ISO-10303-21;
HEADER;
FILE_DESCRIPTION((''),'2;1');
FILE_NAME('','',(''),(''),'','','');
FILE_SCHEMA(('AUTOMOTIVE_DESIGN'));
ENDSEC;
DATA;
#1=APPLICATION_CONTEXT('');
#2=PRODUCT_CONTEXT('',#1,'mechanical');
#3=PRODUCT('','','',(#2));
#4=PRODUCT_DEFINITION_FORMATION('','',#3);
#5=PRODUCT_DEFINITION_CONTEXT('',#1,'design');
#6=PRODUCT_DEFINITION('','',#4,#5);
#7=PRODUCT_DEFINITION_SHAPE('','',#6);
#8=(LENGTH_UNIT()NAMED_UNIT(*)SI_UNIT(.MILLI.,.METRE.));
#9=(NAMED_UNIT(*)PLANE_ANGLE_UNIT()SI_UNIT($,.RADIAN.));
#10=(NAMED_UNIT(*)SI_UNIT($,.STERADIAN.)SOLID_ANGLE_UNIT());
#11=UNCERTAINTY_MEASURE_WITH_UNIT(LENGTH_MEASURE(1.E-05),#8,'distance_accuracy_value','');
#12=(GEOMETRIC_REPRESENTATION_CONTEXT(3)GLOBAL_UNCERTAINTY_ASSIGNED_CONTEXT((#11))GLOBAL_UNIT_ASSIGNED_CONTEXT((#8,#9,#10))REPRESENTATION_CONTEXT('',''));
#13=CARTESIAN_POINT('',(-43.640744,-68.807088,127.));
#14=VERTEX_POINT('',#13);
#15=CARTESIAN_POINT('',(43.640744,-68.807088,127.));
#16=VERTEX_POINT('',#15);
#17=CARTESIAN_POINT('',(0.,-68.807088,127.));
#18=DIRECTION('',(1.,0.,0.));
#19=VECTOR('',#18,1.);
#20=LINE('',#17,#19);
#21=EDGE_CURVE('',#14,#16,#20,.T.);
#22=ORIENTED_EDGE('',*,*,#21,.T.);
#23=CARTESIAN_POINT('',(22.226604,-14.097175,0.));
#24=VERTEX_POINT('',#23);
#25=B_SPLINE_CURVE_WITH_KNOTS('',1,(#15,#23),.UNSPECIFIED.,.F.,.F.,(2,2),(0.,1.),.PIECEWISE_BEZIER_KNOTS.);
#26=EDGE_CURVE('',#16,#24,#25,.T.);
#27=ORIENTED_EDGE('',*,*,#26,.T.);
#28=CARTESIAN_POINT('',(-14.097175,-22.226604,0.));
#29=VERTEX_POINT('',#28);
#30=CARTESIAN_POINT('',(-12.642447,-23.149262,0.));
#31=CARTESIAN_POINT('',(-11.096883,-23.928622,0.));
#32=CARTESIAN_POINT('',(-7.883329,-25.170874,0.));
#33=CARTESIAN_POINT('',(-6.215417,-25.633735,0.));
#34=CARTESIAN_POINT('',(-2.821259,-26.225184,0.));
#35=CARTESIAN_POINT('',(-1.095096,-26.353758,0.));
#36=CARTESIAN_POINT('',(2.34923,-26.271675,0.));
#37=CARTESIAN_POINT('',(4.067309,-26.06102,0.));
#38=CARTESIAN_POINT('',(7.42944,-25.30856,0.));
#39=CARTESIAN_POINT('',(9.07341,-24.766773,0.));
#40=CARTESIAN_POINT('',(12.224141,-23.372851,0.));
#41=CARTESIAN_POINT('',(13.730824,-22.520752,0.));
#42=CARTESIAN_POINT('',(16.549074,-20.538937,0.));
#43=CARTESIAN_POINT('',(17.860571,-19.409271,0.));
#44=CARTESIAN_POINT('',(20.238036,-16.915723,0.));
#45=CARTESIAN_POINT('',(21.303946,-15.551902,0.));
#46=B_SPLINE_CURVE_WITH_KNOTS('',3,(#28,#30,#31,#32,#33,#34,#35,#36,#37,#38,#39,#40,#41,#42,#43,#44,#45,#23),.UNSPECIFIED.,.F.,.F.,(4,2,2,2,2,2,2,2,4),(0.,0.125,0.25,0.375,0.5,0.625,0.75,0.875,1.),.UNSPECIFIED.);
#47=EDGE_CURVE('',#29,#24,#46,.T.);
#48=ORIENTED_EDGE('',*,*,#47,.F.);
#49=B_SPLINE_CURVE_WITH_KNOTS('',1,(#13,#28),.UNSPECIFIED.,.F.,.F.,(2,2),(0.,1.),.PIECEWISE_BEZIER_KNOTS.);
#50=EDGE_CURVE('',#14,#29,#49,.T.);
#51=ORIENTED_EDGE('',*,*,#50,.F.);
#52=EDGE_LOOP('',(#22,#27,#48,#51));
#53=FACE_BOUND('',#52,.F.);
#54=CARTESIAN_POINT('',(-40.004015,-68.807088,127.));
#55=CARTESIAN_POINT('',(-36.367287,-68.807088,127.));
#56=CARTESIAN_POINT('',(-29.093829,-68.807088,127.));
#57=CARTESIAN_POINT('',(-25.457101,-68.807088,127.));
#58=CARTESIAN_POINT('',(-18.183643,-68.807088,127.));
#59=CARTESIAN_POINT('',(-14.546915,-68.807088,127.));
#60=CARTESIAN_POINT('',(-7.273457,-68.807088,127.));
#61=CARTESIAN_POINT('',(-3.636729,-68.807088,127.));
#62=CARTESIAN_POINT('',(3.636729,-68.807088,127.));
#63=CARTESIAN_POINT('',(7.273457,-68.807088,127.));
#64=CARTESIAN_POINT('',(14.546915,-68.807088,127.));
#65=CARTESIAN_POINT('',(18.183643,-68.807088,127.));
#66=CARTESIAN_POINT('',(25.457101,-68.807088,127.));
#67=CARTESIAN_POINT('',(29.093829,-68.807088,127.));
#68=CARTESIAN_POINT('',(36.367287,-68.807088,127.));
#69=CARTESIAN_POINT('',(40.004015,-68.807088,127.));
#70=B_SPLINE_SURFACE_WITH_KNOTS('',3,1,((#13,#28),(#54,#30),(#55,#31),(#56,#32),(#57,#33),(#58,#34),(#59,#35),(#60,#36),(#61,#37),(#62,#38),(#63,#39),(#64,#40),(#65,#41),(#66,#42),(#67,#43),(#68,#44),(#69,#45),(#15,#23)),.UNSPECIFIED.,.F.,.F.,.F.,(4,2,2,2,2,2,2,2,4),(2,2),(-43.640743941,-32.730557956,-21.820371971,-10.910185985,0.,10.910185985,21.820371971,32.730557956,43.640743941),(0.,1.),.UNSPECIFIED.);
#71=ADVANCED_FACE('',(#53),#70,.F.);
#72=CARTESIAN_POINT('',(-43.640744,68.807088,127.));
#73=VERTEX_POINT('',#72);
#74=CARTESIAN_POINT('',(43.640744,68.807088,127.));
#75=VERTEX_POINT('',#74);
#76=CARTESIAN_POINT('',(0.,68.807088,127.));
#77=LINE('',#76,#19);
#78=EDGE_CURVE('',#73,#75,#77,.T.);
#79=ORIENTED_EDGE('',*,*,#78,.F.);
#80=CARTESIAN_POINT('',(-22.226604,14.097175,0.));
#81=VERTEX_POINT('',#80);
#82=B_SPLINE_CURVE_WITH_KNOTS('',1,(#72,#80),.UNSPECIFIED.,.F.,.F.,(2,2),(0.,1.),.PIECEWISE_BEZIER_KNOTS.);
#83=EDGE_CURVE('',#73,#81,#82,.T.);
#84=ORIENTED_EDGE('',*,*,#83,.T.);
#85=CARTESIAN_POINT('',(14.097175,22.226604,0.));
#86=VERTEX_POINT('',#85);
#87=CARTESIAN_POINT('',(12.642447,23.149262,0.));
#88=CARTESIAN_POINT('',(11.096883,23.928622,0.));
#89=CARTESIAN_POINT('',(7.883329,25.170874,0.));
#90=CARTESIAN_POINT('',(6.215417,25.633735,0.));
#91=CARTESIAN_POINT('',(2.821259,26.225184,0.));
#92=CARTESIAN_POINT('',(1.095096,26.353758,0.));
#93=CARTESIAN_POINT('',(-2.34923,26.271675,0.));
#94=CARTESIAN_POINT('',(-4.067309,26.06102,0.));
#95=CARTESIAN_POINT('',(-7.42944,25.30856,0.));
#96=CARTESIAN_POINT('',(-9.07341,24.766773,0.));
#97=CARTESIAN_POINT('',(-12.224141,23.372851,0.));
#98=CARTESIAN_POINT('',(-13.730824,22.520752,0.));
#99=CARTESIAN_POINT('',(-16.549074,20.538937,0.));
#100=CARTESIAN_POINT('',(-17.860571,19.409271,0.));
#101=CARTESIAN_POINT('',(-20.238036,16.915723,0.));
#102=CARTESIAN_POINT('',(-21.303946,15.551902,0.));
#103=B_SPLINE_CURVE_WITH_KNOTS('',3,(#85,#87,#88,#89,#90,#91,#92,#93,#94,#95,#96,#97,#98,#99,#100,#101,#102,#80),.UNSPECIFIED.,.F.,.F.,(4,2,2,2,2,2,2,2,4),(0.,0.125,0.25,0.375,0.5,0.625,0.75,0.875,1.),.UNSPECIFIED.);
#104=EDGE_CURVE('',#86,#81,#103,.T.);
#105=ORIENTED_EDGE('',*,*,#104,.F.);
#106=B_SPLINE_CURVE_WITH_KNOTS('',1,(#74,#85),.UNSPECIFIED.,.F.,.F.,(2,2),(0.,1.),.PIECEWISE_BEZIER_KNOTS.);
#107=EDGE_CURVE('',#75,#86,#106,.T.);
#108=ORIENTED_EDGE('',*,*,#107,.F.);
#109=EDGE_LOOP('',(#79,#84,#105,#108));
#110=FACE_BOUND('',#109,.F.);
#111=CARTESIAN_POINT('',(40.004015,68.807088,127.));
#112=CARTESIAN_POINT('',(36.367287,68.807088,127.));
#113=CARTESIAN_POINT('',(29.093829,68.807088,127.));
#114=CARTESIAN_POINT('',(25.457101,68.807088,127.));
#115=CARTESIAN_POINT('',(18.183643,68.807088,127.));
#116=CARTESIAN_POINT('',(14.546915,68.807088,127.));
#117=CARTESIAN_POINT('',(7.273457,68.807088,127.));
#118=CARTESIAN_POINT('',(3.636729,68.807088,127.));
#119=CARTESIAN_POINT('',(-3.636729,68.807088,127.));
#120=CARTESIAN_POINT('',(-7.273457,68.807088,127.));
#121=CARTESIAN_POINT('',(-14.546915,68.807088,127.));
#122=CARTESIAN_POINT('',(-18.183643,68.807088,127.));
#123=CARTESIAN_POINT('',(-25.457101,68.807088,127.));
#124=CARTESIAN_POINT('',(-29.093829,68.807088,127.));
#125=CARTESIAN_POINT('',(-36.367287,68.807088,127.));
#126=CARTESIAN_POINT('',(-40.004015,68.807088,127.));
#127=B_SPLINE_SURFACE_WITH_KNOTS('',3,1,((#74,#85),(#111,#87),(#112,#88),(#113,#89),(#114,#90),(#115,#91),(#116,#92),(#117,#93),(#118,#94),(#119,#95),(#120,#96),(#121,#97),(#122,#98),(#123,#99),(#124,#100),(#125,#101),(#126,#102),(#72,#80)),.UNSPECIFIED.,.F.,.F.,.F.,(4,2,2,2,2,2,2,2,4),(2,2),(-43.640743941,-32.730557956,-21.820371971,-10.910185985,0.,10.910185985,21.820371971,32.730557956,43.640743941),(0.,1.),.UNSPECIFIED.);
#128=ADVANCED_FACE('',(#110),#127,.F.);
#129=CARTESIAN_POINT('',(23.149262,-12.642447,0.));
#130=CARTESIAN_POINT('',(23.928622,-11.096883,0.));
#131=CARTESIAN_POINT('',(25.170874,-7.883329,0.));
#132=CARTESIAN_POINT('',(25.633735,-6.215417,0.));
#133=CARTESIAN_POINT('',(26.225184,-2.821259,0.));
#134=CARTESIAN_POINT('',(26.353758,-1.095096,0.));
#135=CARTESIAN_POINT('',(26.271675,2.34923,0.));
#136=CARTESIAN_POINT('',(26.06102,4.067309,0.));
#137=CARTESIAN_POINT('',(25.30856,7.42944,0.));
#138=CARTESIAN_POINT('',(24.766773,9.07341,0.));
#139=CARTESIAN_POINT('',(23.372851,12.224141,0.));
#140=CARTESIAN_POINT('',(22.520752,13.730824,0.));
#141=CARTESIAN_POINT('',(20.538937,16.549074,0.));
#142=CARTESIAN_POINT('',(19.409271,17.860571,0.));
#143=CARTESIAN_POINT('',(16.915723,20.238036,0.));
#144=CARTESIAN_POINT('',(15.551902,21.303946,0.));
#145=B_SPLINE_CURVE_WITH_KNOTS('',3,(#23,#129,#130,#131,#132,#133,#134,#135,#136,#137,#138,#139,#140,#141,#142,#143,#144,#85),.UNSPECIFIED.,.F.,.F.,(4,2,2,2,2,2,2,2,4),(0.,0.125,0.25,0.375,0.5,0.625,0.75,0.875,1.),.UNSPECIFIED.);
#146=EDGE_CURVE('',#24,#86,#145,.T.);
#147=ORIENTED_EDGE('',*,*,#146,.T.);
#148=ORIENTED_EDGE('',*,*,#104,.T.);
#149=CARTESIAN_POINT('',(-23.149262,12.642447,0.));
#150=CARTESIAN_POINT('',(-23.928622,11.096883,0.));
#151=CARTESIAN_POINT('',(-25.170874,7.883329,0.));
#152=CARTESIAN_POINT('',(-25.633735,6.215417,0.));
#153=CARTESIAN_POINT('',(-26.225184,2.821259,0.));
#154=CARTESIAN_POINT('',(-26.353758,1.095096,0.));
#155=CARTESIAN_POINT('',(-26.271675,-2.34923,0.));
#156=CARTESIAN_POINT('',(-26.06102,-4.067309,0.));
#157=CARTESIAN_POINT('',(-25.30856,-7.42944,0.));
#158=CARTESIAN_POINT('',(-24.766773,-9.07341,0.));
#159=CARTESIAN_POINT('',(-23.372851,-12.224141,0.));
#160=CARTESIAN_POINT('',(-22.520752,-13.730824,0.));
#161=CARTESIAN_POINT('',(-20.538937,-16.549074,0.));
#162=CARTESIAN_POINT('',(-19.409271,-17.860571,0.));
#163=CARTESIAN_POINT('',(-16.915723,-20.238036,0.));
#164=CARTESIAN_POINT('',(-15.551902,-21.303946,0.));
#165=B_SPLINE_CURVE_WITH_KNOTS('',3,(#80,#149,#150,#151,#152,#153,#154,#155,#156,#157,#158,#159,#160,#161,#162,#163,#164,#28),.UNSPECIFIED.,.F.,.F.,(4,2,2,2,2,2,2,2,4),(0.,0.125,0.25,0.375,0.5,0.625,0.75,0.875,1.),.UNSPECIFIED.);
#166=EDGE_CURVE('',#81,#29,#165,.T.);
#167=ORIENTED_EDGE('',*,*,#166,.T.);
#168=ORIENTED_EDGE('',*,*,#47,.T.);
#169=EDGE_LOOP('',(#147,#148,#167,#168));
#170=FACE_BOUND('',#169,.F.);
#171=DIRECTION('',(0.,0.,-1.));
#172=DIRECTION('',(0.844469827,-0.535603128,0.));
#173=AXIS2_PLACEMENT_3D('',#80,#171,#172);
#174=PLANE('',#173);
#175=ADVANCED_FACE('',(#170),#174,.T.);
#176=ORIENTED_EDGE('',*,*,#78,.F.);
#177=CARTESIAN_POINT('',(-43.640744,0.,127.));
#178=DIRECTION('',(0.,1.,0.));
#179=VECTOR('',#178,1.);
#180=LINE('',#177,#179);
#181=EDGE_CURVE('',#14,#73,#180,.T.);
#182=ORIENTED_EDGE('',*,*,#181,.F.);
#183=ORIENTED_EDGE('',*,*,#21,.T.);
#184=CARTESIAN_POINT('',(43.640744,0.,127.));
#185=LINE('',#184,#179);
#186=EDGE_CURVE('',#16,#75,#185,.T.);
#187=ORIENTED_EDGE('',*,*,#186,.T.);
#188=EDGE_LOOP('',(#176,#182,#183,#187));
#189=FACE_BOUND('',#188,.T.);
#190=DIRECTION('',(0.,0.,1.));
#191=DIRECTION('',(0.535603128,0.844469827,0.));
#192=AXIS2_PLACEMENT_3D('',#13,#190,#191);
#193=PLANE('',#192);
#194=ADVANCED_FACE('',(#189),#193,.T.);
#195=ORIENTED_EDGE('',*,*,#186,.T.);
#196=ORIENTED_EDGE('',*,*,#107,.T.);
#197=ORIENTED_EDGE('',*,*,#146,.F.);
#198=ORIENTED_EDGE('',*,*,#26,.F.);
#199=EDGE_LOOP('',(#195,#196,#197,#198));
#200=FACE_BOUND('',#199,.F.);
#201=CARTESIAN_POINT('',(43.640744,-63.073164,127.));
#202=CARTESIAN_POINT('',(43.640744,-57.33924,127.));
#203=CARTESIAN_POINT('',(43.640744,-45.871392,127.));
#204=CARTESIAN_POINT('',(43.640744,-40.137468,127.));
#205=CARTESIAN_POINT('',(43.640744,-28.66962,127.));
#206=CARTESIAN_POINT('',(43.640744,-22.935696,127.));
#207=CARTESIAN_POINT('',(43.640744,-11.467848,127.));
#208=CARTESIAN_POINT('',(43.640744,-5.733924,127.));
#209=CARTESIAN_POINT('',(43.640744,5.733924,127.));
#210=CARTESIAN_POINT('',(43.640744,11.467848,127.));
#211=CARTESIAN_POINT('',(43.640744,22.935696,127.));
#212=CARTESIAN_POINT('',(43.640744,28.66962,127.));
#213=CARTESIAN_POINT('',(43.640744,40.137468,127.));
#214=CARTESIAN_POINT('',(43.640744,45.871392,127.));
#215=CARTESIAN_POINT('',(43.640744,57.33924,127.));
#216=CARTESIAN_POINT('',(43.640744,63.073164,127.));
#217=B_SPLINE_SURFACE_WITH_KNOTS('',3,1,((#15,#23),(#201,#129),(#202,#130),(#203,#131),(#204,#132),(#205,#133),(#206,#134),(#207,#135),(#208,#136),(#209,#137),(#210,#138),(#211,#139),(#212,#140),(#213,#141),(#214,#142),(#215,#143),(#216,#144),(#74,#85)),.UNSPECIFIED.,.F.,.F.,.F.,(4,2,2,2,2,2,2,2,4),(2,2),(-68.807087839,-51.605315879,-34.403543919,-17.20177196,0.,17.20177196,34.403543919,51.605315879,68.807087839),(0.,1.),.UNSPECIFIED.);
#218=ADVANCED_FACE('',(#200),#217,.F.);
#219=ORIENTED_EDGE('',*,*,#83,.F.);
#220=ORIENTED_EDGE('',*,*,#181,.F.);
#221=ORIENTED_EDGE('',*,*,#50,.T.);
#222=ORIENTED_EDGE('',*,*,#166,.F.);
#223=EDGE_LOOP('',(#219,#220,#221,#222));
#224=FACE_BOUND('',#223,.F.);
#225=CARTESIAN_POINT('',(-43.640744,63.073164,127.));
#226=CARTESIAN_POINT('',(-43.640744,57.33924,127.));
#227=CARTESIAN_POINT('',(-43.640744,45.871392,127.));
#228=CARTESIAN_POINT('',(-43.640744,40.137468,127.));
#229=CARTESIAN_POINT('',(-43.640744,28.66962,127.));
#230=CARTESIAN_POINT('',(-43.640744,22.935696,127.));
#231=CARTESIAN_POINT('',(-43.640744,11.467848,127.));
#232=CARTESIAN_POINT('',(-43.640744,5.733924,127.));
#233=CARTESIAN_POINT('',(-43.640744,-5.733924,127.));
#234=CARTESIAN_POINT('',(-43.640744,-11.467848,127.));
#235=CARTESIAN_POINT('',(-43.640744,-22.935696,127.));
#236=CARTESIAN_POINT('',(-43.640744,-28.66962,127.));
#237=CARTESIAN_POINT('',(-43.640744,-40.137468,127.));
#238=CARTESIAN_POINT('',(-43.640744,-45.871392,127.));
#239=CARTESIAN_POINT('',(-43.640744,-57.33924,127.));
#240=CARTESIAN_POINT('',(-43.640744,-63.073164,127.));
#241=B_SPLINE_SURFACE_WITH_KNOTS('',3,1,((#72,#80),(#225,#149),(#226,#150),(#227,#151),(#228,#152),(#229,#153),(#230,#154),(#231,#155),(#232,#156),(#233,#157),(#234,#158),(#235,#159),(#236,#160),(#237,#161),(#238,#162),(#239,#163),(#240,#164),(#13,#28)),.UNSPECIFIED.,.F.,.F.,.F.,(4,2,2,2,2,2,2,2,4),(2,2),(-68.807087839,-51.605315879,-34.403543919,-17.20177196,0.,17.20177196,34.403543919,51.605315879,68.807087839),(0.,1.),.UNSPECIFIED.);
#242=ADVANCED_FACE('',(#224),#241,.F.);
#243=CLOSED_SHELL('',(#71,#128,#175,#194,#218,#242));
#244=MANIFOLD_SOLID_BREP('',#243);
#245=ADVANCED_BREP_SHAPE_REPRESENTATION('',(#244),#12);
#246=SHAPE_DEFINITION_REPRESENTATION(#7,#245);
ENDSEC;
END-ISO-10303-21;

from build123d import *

# Parameters (mm, degrees)
F2_W = 87.2814878821
F2_H = 137.6141756773


# Not quite as in the source:
# - the arcs of a loft's sections are written as splines that run evenly, so that the points pair up as in the source's solid


with BuildPart() as f3:
    # F2 (on offset) → F3 section 0
    with BuildSketch(Plane.XY.offset(127)):
        Rectangle(F2_W, F2_H)
    # F1 (on Top) → F3 section 1
    with BuildSketch(Plane.XY):
        with BuildLine():
            add(Edge.make_bspline(
                [(14.0971746488, 22.2266040112), (12.642446818, 23.1492619344), (11.0968833316, 23.9286224004), (7.8833287822, 25.1708743783), (6.2154171805, 25.6337351731), (2.8212588422, 26.2251842358), (1.0950960328, 26.3537578788), (-2.3492304928, 26.2716749703), (-4.0673090413, 26.0610204485), (-7.4294402175, 25.3085599691), (-9.0734097099, 24.7667726176), (-12.2241407211, 23.3728512015), (-13.7308243318, 22.5207516043), (-16.5490743521, 20.5389368698), (-17.860571075, 19.4092707367), (-20.2380363367, 16.9157227126), (-21.303946088, 15.5519024795), (-22.2266040112, 14.0971746488)],
                knots=[0, 0, 0, 0, 0.125, 0.125, 0.25, 0.25, 0.375, 0.375, 0.5, 0.5, 0.625, 0.625, 0.75, 0.75, 0.875, 0.875, 1, 1, 1, 1], degree=3))
            add(Edge.make_bspline(
                [(-22.2266040112, 14.0971746488), (-23.1492619344, 12.642446818), (-23.9286224004, 11.0968833316), (-25.1708743783, 7.8833287822), (-25.6337351731, 6.2154171805), (-26.2251842358, 2.8212588422), (-26.3537578788, 1.0950960328), (-26.2716749703, -2.3492304928), (-26.0610204485, -4.0673090413), (-25.3085599691, -7.4294402175), (-24.7667726176, -9.0734097099), (-23.3728512015, -12.2241407211), (-22.5207516043, -13.7308243318), (-20.5389368698, -16.5490743521), (-19.4092707367, -17.860571075), (-16.9157227126, -20.2380363367), (-15.5519024795, -21.303946088), (-14.0971746488, -22.2266040112)],
                knots=[0, 0, 0, 0, 0.125, 0.125, 0.25, 0.25, 0.375, 0.375, 0.5, 0.5, 0.625, 0.625, 0.75, 0.75, 0.875, 0.875, 1, 1, 1, 1], degree=3))
            add(Edge.make_bspline(
                [(-14.0971746488, -22.2266040112), (-12.642446818, -23.1492619344), (-11.0968833316, -23.9286224004), (-7.8833287822, -25.1708743783), (-6.2154171805, -25.6337351731), (-2.8212588422, -26.2251842358), (-1.0950960328, -26.3537578788), (2.3492304928, -26.2716749703), (4.0673090413, -26.0610204485), (7.4294402175, -25.3085599691), (9.0734097099, -24.7667726176), (12.2241407211, -23.3728512015), (13.7308243318, -22.5207516043), (16.5490743521, -20.5389368698), (17.860571075, -19.4092707367), (20.2380363367, -16.9157227126), (21.303946088, -15.5519024795), (22.2266040112, -14.0971746488)],
                knots=[0, 0, 0, 0, 0.125, 0.125, 0.25, 0.25, 0.375, 0.375, 0.5, 0.5, 0.625, 0.625, 0.75, 0.75, 0.875, 0.875, 1, 1, 1, 1], degree=3))
            add(Edge.make_bspline(
                [(22.2266040112, -14.0971746488), (23.1492619344, -12.642446818), (23.9286224004, -11.0968833316), (25.1708743783, -7.8833287822), (25.6337351731, -6.2154171805), (26.2251842358, -2.8212588422), (26.3537578788, -1.0950960328), (26.2716749703, 2.3492304928), (26.0610204485, 4.0673090413), (25.3085599691, 7.4294402175), (24.7667726176, 9.0734097099), (23.3728512015, 12.2241407211), (22.5207516043, 13.7308243318), (20.5389368698, 16.5490743521), (19.4092707367, 17.860571075), (16.9157227126, 20.2380363367), (15.5519024795, 21.303946088), (14.0971746488, 22.2266040112)],
                knots=[0, 0, 0, 0, 0.125, 0.125, 0.25, 0.25, 0.375, 0.375, 0.5, 0.5, 0.625, 0.625, 0.75, 0.75, 0.875, 0.875, 1, 1, 1, 1], degree=3))
        make_face()
    loft(ruled=True)


solid = f3.part
